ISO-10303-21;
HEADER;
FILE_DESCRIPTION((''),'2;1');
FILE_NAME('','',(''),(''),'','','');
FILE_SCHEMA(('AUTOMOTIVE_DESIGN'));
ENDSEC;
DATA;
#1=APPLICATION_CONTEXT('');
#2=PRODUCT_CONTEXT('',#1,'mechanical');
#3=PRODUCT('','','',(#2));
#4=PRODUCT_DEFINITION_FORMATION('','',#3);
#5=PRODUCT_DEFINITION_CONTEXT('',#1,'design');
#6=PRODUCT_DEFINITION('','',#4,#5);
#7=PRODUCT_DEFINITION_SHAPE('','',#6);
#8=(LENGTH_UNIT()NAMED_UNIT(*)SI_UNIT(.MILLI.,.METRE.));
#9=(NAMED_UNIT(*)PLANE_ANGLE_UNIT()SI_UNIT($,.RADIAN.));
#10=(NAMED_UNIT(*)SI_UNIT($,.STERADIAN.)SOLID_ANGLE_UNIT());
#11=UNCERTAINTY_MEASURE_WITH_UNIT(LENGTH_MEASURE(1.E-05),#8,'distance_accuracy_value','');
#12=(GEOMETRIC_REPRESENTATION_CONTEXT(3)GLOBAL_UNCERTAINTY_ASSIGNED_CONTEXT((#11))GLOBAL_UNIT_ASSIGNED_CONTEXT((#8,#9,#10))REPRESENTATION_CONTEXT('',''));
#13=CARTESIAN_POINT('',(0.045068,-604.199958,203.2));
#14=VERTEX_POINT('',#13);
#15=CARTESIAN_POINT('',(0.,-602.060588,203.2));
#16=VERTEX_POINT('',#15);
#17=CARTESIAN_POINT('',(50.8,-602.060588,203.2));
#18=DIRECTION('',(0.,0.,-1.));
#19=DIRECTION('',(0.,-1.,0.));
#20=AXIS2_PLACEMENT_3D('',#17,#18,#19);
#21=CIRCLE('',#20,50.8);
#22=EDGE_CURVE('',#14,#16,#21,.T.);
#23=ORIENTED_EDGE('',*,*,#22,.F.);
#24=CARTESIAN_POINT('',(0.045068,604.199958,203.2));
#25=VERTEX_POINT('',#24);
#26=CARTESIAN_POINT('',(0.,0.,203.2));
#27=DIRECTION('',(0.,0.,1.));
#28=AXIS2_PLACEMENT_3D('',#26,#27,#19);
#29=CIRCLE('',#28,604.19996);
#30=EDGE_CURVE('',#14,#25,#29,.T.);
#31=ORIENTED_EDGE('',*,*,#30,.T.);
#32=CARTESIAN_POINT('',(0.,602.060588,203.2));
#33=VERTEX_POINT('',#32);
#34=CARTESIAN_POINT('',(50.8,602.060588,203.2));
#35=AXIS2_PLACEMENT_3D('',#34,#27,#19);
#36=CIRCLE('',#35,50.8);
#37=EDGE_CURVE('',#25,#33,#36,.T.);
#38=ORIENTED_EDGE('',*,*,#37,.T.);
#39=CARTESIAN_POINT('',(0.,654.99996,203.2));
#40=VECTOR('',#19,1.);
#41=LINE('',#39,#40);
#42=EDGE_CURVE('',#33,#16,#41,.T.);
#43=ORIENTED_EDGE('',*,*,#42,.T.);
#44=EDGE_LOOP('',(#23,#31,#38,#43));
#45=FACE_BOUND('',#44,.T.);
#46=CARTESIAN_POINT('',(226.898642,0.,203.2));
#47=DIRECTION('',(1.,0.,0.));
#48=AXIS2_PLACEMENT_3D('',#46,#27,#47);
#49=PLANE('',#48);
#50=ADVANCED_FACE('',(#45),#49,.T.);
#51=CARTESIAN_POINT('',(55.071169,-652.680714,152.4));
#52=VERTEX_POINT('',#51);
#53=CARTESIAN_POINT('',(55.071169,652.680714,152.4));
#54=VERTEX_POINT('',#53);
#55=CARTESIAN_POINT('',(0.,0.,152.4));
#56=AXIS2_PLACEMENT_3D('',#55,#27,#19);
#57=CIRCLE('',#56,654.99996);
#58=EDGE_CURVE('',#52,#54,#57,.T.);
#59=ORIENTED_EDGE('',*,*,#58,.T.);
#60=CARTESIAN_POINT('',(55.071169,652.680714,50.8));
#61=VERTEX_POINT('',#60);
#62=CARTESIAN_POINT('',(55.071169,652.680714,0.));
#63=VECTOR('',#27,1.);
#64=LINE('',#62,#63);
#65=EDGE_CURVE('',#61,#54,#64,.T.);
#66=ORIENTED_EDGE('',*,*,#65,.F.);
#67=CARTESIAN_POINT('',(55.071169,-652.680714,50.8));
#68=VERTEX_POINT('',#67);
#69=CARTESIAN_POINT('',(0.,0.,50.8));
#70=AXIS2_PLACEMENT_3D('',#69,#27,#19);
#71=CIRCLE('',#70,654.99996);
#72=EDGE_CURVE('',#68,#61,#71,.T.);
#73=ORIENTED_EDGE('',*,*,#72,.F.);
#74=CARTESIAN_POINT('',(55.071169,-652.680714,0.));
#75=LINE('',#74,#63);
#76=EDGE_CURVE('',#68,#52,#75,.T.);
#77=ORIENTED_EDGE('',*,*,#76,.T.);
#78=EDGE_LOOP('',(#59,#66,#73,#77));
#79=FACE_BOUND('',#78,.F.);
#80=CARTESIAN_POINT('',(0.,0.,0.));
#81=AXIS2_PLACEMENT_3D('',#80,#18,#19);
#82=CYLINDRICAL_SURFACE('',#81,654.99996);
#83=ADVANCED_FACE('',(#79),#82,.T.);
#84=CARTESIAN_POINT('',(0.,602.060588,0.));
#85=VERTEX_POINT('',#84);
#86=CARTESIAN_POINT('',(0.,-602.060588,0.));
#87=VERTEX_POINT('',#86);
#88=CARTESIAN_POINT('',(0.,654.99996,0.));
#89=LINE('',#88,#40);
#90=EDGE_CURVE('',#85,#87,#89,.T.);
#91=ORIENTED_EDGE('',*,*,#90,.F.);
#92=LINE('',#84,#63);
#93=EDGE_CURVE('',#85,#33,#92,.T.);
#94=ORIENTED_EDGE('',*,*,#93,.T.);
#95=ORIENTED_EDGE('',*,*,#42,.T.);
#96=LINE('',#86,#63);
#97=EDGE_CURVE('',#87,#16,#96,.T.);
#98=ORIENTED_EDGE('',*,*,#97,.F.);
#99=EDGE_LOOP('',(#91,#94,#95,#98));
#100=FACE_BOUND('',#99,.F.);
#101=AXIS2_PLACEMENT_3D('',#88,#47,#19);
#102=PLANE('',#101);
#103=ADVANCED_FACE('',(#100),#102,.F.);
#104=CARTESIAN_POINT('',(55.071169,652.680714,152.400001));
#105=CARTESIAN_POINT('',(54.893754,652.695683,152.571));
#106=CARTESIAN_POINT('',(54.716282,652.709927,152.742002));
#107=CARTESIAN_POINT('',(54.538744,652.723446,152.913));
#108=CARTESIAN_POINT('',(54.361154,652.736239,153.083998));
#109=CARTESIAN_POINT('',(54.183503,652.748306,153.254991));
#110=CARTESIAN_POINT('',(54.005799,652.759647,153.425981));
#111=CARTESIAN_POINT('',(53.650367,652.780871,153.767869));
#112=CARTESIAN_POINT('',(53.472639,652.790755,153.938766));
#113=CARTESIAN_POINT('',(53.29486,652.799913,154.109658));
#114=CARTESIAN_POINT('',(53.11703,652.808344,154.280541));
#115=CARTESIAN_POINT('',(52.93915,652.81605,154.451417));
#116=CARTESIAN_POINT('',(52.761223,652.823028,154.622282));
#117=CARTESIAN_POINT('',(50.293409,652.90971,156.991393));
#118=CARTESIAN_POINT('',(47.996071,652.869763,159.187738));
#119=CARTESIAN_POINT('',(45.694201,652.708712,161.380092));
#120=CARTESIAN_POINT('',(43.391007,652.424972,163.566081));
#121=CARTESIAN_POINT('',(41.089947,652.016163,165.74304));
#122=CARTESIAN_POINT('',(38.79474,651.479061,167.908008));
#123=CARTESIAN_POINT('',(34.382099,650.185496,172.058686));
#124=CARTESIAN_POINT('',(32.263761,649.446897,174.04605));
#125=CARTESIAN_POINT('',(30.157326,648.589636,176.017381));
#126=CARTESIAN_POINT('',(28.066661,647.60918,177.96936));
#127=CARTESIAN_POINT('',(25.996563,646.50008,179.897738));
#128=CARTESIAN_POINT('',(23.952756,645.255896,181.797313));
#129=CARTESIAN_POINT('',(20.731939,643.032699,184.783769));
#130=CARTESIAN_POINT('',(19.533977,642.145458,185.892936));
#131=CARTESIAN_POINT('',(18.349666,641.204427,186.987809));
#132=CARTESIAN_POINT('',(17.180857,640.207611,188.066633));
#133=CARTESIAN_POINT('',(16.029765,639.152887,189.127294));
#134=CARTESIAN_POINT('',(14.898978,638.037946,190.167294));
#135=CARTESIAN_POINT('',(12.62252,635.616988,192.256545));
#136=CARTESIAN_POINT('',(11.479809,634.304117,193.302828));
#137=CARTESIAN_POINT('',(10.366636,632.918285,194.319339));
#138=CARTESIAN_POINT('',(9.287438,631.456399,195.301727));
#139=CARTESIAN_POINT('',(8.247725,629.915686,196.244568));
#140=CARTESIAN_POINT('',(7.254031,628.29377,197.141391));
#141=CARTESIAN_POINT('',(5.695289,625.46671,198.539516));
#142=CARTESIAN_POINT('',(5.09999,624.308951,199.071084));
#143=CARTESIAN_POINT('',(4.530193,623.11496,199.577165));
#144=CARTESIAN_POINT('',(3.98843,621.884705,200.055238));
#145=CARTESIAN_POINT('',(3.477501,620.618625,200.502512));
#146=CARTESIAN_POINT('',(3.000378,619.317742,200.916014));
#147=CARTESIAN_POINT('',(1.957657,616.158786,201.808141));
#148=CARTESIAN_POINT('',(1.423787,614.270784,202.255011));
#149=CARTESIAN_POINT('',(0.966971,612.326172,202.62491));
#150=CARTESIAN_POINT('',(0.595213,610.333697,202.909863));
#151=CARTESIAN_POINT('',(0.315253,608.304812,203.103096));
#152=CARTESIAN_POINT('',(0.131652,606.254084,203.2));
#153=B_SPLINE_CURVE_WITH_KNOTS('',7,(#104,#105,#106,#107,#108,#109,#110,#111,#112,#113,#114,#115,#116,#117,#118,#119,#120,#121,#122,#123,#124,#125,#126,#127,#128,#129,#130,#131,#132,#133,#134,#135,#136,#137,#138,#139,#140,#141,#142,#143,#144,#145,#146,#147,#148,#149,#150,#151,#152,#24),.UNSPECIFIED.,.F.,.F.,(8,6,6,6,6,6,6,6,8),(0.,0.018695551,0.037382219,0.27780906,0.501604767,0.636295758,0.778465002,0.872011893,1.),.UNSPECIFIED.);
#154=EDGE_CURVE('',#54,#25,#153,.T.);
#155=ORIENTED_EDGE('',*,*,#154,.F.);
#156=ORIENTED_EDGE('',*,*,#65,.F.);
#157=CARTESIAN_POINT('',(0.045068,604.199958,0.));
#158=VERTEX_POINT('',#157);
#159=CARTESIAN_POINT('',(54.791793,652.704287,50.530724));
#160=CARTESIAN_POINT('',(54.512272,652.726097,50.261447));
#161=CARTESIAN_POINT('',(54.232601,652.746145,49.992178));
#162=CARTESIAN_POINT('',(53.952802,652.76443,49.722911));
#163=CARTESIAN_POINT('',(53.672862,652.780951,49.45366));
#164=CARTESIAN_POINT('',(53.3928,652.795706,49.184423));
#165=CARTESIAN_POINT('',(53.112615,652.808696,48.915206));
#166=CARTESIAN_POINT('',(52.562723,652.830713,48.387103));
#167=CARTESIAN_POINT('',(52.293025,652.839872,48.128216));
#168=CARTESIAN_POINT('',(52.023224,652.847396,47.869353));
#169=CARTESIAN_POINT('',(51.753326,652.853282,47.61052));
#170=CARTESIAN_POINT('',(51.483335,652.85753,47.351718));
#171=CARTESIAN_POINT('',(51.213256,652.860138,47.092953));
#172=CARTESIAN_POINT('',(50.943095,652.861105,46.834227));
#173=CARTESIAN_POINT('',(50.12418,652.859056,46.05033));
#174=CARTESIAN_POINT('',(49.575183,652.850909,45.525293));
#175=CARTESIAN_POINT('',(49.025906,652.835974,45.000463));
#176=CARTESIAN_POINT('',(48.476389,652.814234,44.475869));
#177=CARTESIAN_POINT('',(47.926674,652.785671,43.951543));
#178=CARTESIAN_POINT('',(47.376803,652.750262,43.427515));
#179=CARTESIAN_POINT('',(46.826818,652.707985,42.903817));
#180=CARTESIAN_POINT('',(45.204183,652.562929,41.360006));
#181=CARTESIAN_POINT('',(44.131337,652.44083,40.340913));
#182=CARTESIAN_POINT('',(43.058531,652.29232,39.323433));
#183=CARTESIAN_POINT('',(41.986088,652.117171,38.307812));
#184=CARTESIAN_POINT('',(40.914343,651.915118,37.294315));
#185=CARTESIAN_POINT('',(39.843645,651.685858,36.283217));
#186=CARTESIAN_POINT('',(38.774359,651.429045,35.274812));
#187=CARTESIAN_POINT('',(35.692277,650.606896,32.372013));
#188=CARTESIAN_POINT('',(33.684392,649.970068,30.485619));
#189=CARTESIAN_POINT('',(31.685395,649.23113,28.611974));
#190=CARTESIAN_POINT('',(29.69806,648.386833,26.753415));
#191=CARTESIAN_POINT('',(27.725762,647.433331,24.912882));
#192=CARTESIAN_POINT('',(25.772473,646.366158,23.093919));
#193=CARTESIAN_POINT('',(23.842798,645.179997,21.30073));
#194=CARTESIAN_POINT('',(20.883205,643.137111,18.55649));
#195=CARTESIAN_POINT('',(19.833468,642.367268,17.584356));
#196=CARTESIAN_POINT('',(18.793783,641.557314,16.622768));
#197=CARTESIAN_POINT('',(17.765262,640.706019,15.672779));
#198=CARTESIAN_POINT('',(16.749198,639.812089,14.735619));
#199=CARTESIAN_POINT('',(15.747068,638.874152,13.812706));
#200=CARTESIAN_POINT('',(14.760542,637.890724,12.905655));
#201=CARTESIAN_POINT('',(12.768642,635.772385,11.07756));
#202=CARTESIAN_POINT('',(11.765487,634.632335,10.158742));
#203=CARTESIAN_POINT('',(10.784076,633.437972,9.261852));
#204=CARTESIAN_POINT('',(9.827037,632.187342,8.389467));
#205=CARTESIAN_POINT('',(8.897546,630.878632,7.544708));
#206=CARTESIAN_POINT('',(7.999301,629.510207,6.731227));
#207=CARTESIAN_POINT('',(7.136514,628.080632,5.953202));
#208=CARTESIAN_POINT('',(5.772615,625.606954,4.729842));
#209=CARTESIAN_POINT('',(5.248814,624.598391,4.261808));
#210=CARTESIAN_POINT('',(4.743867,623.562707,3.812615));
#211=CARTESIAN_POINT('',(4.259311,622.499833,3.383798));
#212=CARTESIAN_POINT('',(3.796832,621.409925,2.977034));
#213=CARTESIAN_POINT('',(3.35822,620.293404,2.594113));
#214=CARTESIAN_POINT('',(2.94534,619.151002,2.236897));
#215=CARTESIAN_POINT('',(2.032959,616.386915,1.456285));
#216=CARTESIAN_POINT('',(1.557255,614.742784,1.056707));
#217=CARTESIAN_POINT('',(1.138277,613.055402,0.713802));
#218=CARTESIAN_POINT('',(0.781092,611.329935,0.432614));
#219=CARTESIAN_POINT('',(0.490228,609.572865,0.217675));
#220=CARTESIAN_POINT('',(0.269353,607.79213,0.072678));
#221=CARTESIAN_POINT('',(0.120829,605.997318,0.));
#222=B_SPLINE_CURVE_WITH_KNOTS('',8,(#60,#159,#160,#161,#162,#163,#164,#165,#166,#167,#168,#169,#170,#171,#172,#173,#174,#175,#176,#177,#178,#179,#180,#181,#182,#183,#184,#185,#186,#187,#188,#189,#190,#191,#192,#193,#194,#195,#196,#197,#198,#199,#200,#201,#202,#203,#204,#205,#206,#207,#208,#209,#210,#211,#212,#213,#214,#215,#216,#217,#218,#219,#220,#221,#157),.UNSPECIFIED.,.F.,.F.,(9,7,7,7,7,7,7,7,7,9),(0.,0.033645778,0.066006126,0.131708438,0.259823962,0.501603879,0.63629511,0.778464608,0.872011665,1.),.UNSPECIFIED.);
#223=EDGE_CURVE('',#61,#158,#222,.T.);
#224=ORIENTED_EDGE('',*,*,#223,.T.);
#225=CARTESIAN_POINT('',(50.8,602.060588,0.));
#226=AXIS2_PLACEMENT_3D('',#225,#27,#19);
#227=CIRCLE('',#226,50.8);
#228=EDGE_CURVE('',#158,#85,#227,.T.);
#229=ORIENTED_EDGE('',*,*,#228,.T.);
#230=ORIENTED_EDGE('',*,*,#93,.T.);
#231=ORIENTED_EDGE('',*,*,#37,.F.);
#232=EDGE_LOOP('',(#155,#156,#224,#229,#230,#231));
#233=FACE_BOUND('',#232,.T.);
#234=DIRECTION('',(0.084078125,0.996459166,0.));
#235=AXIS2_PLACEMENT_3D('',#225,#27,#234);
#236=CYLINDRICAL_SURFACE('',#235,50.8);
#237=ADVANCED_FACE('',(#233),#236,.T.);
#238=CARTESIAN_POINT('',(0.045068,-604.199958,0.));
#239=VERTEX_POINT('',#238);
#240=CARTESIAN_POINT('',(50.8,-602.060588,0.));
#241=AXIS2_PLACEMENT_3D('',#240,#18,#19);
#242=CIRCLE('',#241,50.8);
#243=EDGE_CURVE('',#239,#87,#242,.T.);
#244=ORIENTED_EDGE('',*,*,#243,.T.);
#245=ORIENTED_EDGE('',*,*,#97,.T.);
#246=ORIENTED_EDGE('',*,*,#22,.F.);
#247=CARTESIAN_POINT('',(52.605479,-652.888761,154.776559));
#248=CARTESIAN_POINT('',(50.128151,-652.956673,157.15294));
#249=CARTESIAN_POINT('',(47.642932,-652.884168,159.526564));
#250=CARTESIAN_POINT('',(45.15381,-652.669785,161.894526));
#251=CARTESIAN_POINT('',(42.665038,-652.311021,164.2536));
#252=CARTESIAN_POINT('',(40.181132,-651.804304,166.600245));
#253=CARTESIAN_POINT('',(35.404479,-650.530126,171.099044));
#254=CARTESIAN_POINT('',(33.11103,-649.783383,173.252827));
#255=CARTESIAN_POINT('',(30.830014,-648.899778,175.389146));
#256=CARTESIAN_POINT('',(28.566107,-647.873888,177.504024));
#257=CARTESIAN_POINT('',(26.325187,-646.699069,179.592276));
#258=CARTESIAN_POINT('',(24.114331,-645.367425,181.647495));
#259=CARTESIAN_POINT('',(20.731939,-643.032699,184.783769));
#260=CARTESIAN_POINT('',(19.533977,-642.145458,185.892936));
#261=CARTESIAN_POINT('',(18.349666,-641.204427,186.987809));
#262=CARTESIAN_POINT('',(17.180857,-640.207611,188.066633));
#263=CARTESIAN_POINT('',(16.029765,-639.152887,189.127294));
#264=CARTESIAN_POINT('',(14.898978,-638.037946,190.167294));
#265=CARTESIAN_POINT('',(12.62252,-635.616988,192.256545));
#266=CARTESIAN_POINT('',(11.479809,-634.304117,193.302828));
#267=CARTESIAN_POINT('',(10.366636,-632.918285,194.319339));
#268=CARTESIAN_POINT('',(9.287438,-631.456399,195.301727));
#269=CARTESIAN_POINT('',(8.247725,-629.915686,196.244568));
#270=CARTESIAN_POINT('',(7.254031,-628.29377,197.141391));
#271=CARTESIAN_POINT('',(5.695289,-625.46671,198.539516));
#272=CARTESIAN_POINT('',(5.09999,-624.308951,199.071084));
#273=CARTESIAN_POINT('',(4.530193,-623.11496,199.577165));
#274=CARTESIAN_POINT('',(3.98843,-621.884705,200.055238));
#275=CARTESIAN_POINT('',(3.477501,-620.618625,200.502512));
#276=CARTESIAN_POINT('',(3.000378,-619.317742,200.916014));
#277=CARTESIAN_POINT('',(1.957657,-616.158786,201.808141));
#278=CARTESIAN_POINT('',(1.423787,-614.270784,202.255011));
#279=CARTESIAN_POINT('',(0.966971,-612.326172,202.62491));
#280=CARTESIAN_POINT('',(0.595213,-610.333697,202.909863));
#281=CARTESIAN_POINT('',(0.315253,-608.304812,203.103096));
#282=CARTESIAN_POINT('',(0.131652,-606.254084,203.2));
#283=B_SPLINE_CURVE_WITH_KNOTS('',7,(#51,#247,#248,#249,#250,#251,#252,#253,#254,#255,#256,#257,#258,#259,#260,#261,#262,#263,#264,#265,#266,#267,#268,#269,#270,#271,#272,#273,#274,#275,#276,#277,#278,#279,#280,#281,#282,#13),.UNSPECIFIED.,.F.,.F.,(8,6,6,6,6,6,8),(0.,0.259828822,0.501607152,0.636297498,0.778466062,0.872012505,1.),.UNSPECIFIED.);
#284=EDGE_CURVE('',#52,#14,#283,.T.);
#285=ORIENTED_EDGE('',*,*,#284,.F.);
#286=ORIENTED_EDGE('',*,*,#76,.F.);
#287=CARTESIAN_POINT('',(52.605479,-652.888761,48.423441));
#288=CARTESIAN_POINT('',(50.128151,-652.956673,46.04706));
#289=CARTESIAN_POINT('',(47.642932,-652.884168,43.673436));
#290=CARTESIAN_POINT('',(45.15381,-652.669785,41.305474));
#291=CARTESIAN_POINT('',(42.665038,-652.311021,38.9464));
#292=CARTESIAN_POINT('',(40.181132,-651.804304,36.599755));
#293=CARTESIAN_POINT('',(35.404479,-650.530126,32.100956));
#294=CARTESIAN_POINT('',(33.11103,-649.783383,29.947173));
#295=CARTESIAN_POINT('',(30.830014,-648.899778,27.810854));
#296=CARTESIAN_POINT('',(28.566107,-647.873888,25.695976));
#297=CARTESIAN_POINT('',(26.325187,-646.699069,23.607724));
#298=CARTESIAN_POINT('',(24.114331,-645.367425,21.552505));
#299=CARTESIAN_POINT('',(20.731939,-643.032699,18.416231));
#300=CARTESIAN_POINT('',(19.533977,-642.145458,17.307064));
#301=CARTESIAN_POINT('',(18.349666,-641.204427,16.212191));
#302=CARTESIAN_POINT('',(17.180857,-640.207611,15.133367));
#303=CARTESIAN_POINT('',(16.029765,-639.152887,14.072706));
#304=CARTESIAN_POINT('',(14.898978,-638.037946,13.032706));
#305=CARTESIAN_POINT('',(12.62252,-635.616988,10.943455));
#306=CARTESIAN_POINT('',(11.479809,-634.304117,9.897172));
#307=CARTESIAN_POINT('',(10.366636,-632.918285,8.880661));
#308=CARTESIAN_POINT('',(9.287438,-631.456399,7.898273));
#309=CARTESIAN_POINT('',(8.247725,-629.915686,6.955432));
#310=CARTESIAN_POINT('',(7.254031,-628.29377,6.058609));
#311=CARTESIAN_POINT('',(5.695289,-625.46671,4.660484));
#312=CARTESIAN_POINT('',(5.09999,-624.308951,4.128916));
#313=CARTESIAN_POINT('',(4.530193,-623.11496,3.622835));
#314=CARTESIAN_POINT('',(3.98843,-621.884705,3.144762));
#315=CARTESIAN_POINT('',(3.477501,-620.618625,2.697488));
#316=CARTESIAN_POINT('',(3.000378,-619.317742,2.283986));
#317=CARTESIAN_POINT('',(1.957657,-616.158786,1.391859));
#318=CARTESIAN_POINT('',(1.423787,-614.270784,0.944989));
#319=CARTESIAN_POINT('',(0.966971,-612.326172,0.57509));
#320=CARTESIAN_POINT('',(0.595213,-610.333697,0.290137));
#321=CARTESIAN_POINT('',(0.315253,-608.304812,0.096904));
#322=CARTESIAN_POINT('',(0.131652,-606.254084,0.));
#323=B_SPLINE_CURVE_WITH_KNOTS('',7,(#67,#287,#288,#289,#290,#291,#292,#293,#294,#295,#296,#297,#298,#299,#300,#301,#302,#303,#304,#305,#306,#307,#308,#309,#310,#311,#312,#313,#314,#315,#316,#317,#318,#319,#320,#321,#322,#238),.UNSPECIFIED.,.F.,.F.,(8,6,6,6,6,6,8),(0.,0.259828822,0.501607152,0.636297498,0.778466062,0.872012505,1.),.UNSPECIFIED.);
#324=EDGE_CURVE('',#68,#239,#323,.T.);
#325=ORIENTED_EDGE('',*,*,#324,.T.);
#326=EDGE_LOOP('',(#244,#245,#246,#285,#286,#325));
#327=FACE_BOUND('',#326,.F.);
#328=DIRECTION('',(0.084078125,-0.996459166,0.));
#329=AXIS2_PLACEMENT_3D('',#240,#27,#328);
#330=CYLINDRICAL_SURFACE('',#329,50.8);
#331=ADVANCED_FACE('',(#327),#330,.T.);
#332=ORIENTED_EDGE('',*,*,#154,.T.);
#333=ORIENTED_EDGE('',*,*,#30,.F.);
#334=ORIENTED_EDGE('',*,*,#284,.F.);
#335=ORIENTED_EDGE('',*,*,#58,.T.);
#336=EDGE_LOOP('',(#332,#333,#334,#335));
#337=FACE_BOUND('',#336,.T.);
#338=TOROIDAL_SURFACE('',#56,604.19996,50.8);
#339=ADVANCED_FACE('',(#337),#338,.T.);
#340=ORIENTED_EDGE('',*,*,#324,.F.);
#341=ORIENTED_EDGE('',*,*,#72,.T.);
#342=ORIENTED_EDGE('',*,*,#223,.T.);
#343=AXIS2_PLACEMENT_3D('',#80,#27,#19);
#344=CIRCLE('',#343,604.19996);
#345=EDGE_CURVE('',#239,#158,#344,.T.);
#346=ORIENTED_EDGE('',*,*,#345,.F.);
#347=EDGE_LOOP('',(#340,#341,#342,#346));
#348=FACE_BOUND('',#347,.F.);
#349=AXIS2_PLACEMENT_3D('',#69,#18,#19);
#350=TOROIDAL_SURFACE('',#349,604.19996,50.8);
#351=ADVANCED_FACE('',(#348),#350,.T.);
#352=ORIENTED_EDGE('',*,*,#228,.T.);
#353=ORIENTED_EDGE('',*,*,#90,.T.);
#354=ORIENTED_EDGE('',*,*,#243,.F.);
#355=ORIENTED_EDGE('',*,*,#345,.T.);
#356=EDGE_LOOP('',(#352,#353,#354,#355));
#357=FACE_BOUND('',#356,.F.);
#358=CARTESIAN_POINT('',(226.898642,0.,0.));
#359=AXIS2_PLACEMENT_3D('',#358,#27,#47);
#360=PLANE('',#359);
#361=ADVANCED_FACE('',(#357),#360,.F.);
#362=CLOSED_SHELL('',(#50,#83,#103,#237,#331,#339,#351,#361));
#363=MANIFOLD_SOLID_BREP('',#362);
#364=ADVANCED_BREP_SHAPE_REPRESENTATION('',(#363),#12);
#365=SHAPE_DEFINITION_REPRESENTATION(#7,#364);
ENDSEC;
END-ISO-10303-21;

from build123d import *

# Parameters (mm, degrees)
F1_DEPTH = 203.2
F2_R     = 50.8


with BuildPart() as f1:
    # F0 (on Top) → F1 (new body)
    with BuildSketch(Plane.XY):
        with BuildLine():
            ThreePointArc((0, -654.99996), (654.99996, 0), (0, 654.99996))
            Line((0, 654.99996), (0, -654.99996))
        make_face()
    extrude(amount=F1_DEPTH)

    # F2
    f2_edges = [f1.edges().sort_by_distance(p)[0] for p in [
        (654.99996, 0, 203.2),
        (654.99996, 0, 0),
        (0, 654.99996, 101.6),
        (0, -654.99996, 101.6),
    ]]
    fillet(f2_edges, radius=F2_R)


solid = f1.part
